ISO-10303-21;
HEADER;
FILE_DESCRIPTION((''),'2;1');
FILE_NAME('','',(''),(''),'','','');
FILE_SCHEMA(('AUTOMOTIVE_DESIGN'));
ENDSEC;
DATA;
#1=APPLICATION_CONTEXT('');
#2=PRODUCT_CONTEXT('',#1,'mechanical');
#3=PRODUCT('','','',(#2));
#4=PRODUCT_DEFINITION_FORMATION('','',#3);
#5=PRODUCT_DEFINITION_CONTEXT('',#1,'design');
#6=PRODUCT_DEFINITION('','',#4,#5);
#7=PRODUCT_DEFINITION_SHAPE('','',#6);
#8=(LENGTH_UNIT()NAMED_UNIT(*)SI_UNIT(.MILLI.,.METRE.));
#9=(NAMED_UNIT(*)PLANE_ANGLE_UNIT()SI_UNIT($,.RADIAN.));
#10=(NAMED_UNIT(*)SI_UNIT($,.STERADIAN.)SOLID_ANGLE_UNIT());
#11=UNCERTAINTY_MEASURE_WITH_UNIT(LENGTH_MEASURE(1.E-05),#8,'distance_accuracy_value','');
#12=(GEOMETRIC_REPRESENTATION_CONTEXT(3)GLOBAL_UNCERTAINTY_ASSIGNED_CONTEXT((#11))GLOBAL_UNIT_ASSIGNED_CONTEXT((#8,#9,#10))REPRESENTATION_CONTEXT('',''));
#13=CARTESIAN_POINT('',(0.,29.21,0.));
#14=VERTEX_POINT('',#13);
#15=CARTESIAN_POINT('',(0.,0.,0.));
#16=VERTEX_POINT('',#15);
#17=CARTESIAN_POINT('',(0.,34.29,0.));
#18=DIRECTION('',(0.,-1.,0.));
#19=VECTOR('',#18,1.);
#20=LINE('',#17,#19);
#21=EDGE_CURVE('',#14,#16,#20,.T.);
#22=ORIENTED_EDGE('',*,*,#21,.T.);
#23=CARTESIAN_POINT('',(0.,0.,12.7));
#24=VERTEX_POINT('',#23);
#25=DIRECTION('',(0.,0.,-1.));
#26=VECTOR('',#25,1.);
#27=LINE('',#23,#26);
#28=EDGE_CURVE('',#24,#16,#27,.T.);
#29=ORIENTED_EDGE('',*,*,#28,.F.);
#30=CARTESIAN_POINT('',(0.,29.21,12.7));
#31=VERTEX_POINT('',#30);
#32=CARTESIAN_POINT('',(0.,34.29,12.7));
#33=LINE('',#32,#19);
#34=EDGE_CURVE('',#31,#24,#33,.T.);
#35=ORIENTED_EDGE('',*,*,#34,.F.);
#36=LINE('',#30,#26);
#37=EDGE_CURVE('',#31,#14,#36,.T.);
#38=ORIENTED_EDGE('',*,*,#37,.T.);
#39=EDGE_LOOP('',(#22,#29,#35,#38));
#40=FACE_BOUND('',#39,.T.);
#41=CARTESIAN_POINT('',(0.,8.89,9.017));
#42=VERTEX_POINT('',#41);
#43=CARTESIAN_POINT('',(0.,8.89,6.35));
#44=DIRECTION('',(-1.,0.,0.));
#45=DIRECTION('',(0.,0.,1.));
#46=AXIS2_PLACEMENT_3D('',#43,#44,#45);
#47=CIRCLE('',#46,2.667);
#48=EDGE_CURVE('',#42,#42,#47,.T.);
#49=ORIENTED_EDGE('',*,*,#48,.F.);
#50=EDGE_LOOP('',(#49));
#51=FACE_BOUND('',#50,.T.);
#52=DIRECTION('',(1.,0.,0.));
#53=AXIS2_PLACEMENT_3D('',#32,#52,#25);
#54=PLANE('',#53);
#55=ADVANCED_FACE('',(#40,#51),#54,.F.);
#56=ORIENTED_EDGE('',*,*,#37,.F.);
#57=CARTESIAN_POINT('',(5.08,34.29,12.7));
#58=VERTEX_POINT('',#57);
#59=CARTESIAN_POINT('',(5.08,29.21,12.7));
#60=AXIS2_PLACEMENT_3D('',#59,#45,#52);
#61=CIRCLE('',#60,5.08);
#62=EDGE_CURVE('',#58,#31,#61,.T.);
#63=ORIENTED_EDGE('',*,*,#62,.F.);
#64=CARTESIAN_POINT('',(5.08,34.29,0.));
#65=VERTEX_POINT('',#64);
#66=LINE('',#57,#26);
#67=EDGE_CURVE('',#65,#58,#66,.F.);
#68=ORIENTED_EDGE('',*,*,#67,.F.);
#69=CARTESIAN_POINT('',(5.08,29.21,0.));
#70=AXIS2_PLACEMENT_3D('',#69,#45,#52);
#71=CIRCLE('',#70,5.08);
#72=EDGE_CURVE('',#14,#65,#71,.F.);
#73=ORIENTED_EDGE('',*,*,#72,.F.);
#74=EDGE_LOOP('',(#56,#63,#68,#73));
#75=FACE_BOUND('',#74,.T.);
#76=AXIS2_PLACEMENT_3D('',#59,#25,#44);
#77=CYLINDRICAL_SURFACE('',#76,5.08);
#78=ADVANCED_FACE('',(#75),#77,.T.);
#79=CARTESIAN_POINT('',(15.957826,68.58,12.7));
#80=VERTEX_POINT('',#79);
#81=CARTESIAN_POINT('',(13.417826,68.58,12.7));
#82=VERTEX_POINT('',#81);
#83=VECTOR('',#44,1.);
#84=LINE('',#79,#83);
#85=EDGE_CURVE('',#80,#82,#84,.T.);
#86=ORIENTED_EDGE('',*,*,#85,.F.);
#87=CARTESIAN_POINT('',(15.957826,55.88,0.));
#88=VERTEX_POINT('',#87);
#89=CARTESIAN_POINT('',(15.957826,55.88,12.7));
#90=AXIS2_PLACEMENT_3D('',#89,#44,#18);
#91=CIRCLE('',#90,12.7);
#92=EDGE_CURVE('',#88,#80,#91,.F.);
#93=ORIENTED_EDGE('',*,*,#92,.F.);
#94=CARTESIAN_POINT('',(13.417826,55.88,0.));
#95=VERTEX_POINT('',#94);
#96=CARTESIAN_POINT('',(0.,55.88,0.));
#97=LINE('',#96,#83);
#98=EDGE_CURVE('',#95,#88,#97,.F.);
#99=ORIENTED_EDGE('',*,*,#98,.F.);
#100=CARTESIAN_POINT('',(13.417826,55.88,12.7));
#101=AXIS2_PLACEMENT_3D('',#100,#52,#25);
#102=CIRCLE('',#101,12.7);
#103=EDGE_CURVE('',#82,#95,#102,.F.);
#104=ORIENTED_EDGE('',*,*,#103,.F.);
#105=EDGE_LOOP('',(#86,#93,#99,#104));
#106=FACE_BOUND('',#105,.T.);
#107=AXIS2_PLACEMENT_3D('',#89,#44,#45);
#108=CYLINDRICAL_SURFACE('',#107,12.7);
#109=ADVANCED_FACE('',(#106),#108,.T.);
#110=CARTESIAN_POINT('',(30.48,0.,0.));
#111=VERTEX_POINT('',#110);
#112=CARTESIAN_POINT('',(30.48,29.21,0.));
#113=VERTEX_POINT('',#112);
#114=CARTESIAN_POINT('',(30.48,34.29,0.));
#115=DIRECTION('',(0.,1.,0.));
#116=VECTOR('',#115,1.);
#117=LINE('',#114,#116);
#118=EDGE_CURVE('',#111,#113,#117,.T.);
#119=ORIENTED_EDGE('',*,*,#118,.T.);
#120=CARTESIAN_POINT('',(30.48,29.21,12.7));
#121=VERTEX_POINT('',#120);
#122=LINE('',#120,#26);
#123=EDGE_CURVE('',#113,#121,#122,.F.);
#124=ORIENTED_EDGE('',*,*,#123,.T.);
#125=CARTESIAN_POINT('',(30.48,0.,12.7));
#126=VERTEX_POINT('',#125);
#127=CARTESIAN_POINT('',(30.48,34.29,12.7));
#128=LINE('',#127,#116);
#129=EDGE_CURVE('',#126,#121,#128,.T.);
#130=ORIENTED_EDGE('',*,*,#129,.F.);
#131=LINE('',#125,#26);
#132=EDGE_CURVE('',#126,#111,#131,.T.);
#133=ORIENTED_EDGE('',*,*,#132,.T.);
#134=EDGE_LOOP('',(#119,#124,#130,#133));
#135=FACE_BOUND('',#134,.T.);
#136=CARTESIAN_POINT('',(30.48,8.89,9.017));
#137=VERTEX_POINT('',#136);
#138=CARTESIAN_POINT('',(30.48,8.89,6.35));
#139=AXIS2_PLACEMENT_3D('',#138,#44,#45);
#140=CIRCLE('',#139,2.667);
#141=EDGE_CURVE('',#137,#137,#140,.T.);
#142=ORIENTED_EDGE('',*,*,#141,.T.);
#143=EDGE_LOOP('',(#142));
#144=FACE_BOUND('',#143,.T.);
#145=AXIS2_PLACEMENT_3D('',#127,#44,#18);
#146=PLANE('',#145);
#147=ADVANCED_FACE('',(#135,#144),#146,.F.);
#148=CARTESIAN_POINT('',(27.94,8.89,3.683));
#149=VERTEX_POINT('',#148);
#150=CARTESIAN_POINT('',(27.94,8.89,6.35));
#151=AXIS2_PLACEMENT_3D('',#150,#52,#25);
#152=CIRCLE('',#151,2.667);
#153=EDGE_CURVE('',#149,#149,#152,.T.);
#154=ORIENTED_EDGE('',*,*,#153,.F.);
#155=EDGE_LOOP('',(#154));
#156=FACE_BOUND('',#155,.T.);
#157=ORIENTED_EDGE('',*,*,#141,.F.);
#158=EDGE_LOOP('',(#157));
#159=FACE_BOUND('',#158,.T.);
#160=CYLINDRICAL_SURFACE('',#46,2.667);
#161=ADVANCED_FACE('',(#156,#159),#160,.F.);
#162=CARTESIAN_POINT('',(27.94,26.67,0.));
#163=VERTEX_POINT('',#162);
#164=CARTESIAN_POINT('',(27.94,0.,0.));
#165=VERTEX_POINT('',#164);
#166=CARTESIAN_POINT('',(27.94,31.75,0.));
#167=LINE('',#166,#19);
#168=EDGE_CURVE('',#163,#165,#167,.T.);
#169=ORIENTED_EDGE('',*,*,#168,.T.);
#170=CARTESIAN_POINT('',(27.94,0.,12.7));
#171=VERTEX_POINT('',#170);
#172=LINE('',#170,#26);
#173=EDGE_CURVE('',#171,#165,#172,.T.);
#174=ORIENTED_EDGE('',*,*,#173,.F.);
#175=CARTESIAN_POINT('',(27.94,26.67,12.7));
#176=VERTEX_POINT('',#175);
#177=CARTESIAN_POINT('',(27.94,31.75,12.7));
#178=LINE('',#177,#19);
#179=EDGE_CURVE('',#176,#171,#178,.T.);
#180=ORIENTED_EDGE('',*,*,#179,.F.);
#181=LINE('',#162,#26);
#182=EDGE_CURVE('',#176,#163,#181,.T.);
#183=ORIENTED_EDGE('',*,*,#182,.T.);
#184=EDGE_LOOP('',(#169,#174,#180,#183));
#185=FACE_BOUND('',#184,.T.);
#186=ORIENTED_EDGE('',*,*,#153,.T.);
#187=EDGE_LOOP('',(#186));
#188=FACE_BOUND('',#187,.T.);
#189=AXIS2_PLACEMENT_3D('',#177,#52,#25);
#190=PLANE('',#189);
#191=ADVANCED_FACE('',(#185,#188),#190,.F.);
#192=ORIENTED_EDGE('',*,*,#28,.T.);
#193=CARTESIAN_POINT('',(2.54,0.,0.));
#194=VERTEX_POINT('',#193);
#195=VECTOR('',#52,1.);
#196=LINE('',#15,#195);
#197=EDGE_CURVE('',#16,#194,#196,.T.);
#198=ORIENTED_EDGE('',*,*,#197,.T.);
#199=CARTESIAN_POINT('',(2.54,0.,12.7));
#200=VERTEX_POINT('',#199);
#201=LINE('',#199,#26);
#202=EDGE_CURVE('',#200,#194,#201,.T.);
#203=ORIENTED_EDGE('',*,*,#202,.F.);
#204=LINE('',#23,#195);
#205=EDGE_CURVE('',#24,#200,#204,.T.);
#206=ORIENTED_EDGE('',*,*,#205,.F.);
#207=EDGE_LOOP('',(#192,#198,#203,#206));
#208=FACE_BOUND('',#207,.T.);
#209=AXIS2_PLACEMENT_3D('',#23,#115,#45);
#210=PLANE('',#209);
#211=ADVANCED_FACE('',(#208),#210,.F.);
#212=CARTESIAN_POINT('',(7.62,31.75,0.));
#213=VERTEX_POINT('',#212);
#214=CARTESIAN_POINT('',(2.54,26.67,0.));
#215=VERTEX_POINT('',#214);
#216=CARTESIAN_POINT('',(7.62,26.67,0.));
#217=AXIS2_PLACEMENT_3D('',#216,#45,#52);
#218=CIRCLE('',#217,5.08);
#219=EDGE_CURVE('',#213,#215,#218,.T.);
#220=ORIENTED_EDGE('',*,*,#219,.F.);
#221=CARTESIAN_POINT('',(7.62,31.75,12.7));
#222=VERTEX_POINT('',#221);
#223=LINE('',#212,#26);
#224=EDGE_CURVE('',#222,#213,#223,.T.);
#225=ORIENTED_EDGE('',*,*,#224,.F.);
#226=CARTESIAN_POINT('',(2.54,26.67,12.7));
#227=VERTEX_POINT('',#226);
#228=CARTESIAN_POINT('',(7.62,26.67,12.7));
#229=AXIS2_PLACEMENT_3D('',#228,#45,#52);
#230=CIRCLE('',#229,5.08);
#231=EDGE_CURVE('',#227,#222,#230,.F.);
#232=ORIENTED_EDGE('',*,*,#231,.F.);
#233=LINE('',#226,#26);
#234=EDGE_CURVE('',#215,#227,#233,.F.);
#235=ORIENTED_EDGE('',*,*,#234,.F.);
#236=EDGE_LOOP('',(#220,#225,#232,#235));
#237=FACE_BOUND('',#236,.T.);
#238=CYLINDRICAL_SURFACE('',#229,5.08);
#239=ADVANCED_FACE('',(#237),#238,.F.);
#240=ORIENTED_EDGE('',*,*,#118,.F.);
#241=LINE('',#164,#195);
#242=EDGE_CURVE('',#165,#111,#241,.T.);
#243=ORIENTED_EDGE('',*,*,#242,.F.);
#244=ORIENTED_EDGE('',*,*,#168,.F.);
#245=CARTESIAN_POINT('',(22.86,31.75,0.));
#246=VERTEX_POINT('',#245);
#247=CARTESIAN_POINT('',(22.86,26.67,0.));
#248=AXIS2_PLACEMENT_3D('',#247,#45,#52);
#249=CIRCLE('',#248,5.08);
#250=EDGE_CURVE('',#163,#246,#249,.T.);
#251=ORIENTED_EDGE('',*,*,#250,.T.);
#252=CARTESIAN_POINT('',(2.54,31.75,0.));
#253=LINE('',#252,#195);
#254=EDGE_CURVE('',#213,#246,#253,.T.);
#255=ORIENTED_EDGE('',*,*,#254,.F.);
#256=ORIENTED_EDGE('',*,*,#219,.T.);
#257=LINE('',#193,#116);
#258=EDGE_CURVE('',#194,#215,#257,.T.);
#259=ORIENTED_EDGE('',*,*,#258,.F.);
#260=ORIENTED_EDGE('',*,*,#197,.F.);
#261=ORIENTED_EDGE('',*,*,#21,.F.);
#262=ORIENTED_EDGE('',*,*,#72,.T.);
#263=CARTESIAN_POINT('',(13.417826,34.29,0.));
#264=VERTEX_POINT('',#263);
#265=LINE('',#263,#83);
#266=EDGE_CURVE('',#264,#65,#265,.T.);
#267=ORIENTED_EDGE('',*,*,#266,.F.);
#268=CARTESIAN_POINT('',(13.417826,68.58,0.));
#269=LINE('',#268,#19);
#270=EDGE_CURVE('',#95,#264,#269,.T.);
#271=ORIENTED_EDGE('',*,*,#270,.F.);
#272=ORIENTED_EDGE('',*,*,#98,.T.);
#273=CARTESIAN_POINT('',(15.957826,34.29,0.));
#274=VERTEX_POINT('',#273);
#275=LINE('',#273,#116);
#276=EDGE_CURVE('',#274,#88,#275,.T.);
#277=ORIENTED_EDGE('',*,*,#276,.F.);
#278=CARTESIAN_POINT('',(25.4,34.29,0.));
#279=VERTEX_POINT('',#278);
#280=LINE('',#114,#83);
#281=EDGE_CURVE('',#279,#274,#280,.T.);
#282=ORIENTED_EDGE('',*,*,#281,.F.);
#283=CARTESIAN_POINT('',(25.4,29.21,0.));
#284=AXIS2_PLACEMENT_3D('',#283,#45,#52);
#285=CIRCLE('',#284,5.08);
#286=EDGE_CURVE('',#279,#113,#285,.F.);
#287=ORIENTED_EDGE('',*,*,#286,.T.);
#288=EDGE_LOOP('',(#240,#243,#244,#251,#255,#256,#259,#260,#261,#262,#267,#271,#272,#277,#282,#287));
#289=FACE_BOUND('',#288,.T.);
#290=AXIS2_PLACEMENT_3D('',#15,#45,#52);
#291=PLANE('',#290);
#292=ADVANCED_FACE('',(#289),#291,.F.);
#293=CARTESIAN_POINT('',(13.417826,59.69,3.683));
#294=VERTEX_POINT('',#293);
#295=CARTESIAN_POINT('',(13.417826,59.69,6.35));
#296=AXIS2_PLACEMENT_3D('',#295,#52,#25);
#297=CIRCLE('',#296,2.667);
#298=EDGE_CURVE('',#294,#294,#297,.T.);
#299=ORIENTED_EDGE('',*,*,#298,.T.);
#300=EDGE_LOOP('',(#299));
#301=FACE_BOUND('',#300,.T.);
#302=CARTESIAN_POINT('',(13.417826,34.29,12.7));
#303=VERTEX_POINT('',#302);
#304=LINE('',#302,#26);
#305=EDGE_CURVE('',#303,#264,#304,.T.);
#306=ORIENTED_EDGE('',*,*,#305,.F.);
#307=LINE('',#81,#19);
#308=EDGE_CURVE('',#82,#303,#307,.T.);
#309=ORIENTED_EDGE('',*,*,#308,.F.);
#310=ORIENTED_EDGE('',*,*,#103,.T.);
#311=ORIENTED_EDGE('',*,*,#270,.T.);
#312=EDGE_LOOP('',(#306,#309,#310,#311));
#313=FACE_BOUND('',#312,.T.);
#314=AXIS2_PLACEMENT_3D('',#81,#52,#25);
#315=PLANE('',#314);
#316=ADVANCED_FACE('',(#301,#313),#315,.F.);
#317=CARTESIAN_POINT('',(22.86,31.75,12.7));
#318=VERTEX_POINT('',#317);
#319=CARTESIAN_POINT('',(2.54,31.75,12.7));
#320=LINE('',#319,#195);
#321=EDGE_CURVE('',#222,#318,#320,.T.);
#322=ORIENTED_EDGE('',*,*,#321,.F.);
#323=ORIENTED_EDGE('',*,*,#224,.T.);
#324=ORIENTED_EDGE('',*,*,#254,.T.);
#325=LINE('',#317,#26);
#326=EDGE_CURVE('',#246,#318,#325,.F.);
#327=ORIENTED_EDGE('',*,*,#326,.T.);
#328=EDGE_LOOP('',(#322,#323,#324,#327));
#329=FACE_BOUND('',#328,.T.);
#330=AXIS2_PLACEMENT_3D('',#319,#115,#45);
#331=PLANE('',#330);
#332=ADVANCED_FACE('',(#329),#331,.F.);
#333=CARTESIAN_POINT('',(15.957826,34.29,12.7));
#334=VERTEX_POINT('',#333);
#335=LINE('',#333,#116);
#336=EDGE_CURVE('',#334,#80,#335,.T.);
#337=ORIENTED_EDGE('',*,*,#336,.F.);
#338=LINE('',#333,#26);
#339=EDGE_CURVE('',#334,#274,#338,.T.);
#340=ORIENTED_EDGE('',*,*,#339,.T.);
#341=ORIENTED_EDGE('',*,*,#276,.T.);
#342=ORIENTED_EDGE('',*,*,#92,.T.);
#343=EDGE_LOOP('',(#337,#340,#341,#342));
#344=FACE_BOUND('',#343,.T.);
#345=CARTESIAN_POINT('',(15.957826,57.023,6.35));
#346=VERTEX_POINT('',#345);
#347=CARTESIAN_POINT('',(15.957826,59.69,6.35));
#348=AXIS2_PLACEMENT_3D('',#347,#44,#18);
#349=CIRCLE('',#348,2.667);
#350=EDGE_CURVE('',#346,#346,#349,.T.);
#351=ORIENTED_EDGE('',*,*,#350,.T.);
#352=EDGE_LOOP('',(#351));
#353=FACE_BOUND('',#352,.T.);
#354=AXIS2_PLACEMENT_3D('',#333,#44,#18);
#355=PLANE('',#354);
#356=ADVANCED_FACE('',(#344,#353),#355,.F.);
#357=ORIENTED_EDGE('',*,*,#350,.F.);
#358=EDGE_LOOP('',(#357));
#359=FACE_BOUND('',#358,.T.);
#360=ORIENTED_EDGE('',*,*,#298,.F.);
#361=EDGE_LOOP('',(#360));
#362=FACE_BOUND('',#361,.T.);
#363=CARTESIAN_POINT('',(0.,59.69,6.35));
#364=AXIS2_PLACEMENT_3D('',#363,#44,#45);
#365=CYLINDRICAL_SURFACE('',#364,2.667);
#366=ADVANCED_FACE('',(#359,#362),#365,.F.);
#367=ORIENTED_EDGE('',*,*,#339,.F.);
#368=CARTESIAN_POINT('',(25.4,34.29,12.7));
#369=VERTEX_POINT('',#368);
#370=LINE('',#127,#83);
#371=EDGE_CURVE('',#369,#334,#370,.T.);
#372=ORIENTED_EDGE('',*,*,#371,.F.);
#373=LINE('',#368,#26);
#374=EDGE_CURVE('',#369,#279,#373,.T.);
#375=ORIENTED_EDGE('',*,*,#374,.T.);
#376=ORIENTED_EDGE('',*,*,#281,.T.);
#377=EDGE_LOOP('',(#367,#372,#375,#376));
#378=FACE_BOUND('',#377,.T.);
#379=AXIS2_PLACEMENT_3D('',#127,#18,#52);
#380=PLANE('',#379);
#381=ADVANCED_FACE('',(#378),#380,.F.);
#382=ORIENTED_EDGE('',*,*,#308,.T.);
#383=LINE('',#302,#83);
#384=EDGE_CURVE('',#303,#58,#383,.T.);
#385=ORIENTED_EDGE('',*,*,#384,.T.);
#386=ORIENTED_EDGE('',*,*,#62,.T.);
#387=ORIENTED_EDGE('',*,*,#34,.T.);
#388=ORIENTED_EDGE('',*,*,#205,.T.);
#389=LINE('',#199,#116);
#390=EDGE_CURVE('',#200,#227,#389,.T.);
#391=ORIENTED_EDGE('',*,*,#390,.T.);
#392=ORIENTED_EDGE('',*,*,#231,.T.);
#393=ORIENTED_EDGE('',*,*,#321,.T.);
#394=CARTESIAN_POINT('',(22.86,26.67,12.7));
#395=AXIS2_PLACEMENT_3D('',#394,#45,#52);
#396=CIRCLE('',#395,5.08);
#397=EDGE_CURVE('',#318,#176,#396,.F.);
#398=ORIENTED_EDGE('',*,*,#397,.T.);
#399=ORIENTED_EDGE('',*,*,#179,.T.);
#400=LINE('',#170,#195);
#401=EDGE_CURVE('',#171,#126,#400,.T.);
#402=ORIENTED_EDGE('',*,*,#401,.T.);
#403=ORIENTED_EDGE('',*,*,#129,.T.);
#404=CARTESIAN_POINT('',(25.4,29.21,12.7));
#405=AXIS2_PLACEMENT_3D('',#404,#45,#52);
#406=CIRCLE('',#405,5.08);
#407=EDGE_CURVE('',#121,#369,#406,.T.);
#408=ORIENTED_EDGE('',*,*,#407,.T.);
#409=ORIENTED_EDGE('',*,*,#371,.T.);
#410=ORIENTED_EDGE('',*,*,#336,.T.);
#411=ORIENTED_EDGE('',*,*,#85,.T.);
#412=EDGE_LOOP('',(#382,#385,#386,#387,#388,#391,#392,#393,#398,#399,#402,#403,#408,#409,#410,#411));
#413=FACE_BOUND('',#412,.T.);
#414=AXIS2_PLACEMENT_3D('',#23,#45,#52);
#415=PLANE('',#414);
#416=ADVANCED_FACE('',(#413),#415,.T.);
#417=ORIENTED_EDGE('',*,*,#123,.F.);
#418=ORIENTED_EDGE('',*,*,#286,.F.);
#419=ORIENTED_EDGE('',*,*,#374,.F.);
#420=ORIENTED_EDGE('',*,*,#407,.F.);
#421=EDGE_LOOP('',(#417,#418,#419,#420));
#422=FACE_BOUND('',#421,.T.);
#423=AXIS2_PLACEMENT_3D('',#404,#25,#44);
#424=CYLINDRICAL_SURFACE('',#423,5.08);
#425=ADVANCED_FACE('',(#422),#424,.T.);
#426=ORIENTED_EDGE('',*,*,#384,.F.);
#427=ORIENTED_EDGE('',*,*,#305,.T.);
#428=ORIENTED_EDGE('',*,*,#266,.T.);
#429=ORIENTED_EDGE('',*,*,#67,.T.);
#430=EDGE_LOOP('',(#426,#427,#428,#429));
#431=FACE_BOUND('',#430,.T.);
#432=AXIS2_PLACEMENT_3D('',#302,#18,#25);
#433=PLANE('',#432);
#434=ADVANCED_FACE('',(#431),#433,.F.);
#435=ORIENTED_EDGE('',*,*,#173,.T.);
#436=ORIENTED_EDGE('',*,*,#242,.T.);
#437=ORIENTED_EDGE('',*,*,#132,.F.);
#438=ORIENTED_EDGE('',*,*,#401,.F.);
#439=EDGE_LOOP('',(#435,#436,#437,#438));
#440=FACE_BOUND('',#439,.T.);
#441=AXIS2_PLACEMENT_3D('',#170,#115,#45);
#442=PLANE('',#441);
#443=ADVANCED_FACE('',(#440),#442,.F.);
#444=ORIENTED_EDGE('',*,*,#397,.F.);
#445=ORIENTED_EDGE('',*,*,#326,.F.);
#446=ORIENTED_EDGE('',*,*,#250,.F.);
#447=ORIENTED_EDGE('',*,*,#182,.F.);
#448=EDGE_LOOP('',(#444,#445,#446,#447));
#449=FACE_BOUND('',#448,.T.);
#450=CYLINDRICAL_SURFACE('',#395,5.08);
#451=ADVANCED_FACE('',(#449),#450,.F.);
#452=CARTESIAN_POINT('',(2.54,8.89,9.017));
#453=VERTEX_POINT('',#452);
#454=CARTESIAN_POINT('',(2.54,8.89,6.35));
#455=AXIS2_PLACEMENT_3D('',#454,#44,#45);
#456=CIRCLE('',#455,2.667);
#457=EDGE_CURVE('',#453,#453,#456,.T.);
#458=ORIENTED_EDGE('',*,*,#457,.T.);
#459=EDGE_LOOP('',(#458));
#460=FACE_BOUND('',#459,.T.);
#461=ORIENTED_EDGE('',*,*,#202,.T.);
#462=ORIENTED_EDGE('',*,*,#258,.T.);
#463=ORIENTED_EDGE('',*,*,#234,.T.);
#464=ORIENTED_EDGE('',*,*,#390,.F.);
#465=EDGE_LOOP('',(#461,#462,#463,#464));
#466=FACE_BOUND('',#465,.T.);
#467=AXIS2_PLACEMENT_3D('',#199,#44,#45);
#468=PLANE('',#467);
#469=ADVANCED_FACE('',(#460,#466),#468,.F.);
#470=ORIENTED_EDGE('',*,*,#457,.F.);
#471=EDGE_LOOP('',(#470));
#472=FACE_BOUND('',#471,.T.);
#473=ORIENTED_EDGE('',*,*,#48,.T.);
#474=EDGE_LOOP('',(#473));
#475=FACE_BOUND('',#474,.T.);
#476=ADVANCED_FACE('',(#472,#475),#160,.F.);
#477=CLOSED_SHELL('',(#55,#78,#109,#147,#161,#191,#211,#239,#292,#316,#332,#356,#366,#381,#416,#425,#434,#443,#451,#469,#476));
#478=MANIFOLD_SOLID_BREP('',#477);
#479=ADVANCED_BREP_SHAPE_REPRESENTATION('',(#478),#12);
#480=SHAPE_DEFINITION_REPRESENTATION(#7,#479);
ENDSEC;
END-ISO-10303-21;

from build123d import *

# Parameters (mm, degrees)
BOSS_EXTRUDE1_DEPTH      = 12.7
F_0000_CLEARANCE_HOLE1_D = 5.334
FILLET1_R                = 5.08
FILLET2_R                = 12.7


with BuildPart() as part:
    # Sketch1 → Boss-Extrude1 (new body)
    with BuildSketch(Plane.XY):
        Polygon((0, 0), (2.54, 0), (2.54, 31.75), (27.94, 31.75), (27.94, 0), (30.48, 0), (30.48, 34.29), (15.957826087, 34.29), (15.957826087, 68.58), (13.417826087, 68.58), (13.417826087, 34.29), (0, 34.29), align=None)
    extrude(amount=BOSS_EXTRUDE1_DEPTH)

    # #0000 Clearance Hole1 (through all)
    with Locations(Plane(origin=(0, 0, 0), x_dir=(0, 0, -1), z_dir=(-1, 0, 0))):
        with Locations((-6.35, -59.69), (-6.35, -8.89)):
            Hole(F_0000_CLEARANCE_HOLE1_D / 2)

    # Fillet1
    fillet1_edges = [part.edges().sort_by_distance(p)[0] for p in [
        (0, 34.29, 6.35),
        (30.48, 34.29, 6.35),
        (27.94, 31.75, 6.35),
        (2.54, 31.75, 6.35),
    ]]
    fillet(fillet1_edges, radius=FILLET1_R)

    # Fillet2
    fillet2_edges = [part.edges().sort_by_distance(p)[0] for p in [
        (14.687826087, 68.58, 0),
    ]]
    fillet(fillet2_edges, radius=FILLET2_R - 0.0001)  # a hair under: the kernel refuses the full size


solid = part.part
